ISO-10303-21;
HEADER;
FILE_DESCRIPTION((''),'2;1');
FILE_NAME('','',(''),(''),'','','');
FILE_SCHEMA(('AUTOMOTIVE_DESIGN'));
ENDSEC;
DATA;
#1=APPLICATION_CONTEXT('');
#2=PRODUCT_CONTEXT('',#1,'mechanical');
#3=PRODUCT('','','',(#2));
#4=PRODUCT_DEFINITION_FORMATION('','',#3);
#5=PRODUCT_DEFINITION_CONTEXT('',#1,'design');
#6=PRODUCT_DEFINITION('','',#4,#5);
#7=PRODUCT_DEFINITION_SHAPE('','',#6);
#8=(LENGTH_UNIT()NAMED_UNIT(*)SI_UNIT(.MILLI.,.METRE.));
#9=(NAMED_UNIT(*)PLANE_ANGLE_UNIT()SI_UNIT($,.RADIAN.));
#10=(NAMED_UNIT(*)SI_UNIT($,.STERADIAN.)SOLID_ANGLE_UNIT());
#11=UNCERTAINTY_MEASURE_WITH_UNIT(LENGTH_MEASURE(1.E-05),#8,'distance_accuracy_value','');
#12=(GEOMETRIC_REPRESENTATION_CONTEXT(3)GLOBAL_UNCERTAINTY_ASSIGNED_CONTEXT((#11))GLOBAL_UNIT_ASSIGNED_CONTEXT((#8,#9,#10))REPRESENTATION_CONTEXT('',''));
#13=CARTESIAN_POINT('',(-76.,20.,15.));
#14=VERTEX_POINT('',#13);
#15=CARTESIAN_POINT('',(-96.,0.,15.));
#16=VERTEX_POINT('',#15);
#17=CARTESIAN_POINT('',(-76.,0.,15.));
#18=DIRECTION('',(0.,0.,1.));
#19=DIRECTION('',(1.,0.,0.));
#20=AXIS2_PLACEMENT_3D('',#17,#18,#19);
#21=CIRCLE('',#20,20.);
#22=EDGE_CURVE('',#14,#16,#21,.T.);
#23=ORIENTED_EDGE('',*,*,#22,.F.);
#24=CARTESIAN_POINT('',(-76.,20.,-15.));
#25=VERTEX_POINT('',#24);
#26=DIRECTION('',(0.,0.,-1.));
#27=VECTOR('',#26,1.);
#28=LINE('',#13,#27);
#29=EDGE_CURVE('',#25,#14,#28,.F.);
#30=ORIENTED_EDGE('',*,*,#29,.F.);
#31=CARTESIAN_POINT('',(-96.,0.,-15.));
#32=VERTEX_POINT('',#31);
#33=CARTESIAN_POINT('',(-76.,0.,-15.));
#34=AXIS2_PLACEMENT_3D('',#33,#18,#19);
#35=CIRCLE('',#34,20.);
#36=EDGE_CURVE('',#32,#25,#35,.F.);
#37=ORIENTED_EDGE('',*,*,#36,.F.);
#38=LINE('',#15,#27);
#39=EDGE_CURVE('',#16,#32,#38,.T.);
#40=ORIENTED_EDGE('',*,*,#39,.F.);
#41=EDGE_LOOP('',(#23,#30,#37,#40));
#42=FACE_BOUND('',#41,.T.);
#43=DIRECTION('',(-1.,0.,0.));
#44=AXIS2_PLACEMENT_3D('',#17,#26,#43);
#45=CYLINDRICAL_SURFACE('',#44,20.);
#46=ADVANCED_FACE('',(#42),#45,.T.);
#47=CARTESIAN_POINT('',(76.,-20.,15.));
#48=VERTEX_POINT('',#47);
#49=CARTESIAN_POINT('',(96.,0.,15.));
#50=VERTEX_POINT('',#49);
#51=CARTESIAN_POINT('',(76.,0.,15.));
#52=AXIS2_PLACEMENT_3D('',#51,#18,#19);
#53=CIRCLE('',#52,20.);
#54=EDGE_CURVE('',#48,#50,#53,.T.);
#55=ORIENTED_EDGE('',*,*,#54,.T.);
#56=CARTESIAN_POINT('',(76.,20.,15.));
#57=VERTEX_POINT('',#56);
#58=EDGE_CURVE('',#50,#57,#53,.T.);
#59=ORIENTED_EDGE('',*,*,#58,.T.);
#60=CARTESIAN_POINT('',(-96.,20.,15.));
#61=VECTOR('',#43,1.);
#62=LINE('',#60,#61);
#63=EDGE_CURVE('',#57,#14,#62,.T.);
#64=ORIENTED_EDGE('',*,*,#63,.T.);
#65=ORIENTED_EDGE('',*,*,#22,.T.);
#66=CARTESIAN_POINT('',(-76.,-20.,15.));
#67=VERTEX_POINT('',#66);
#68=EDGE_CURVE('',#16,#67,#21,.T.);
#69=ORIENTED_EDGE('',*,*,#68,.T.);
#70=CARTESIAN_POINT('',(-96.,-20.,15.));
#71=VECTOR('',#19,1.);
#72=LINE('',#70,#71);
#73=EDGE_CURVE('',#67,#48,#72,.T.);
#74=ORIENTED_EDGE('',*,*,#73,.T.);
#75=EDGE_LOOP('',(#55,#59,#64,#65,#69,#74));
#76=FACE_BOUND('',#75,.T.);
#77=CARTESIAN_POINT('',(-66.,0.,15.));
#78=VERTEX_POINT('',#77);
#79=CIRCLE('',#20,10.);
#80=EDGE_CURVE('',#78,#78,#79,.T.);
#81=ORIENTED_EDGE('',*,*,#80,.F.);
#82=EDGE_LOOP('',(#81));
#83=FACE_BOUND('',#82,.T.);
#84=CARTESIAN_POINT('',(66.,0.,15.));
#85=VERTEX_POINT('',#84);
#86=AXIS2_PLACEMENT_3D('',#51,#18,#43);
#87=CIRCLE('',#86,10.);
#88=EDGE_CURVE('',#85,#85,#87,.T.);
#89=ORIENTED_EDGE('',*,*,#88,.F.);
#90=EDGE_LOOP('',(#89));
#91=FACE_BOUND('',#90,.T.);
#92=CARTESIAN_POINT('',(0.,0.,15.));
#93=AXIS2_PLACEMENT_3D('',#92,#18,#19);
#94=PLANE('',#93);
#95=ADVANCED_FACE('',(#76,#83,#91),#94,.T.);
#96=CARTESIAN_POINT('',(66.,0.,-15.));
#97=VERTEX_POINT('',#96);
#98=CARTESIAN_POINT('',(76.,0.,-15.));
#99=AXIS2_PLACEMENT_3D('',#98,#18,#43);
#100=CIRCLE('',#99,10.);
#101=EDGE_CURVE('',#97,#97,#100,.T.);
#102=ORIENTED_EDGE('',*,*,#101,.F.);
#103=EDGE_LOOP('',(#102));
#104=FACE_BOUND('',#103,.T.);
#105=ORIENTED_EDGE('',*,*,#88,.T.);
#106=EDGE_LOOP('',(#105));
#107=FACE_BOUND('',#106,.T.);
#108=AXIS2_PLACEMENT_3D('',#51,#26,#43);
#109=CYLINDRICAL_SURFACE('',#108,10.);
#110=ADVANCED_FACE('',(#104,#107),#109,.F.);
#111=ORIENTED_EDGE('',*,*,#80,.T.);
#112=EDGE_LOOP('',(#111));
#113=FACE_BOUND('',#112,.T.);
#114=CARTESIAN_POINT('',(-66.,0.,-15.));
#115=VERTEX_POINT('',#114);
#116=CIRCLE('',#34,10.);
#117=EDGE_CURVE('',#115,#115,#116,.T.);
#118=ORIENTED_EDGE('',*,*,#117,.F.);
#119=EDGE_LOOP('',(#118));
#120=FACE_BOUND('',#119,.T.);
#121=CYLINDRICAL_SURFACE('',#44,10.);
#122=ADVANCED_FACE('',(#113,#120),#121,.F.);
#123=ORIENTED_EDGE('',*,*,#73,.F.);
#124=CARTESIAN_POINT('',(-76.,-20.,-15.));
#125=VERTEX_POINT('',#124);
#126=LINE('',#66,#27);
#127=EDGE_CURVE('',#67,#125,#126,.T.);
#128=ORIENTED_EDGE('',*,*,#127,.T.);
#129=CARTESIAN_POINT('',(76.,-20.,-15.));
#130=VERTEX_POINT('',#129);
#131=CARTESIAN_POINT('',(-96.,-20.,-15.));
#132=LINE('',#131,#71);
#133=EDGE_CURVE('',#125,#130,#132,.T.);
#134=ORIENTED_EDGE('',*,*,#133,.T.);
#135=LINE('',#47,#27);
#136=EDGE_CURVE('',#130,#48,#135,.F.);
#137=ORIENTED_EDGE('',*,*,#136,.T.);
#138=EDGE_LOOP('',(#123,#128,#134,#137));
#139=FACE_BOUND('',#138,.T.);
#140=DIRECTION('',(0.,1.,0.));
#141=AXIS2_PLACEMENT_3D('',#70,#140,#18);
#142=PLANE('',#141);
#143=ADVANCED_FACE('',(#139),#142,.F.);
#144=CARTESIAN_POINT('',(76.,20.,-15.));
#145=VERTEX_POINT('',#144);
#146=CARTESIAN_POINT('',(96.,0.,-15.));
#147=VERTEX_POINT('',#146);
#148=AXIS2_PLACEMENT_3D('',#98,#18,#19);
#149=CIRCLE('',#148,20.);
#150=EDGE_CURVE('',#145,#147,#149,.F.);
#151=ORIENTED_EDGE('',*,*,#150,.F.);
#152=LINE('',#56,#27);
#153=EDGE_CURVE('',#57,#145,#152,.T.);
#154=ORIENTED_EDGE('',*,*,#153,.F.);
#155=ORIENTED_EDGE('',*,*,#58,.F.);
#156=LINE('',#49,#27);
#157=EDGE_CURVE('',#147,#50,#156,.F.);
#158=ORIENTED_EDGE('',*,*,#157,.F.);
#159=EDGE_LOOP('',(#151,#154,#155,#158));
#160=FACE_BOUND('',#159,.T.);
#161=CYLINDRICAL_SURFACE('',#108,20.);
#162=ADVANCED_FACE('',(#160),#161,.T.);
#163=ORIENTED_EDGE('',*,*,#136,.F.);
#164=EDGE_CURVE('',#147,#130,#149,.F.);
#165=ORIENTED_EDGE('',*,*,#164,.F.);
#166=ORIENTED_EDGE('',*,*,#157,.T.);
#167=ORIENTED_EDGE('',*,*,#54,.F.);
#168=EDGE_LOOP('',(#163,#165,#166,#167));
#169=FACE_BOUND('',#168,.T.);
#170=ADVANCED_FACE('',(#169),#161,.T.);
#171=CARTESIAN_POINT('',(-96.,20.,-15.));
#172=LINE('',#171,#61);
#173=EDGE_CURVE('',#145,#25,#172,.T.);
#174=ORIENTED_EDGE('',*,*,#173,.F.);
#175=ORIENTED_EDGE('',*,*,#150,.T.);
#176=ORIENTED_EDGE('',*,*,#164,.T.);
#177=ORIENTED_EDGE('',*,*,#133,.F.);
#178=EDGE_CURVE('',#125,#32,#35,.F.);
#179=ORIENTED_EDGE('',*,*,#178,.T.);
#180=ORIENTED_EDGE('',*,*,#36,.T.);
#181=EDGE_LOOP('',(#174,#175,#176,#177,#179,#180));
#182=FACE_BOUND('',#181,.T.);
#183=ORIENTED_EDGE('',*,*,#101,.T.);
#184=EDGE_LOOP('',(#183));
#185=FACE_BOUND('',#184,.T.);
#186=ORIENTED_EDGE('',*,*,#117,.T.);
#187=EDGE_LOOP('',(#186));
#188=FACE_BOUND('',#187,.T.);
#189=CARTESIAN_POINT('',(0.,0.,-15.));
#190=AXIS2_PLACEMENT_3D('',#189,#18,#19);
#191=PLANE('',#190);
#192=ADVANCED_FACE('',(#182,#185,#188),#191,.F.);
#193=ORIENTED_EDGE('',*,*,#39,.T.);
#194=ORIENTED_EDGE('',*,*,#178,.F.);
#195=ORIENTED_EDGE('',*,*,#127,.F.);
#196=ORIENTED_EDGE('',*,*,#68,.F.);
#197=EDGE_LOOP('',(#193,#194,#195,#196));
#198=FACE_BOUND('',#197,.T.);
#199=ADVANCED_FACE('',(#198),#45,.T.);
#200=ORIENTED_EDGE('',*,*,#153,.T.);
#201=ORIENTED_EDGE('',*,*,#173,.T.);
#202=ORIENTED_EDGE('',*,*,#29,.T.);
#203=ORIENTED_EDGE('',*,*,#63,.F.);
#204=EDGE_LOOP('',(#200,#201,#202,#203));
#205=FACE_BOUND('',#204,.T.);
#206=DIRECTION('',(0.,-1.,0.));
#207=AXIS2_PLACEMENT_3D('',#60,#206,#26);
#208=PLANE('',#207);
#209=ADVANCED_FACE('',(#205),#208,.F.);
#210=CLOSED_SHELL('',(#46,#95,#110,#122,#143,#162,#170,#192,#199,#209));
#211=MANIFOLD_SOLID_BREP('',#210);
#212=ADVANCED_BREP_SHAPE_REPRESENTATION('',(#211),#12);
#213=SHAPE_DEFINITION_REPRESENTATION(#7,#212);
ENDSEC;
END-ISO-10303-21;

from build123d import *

# Parameters (mm, degrees)
IZIM1_W                     = 192
IZIM1_H                     = 40
IZIM1_R                     = 10
Y_KSEKLIK_EKSTR_ZYON1_DEPTH = 15
RADYUS1_R                   = 20


with BuildPart() as part:
    # Çizim1 → Yükseklik-Ekstrüzyon1 (new, symmetric)
    with BuildSketch(Plane.XY):
        Rectangle(IZIM1_W, IZIM1_H)
        with Locations((-76, 0)):
            Circle(IZIM1_R, mode=Mode.SUBTRACT)
        with Locations(Location((76, 0, 0), (0, 0, 180))):
            Circle(IZIM1_R, mode=Mode.SUBTRACT)
    extrude(amount=Y_KSEKLIK_EKSTR_ZYON1_DEPTH, both=True)

    # Radyus1
    radyus1_edges = [part.edges().sort_by_distance(p)[0] for p in [
        (-96, -20, 0),
        (-96, 20, 0),
        (96, -20, 0),
        (96, 20, 0),
    ]]
    fillet(radyus1_edges, radius=RADYUS1_R - 0.0001)  # a hair under: the kernel refuses the full size


solid = part.part
